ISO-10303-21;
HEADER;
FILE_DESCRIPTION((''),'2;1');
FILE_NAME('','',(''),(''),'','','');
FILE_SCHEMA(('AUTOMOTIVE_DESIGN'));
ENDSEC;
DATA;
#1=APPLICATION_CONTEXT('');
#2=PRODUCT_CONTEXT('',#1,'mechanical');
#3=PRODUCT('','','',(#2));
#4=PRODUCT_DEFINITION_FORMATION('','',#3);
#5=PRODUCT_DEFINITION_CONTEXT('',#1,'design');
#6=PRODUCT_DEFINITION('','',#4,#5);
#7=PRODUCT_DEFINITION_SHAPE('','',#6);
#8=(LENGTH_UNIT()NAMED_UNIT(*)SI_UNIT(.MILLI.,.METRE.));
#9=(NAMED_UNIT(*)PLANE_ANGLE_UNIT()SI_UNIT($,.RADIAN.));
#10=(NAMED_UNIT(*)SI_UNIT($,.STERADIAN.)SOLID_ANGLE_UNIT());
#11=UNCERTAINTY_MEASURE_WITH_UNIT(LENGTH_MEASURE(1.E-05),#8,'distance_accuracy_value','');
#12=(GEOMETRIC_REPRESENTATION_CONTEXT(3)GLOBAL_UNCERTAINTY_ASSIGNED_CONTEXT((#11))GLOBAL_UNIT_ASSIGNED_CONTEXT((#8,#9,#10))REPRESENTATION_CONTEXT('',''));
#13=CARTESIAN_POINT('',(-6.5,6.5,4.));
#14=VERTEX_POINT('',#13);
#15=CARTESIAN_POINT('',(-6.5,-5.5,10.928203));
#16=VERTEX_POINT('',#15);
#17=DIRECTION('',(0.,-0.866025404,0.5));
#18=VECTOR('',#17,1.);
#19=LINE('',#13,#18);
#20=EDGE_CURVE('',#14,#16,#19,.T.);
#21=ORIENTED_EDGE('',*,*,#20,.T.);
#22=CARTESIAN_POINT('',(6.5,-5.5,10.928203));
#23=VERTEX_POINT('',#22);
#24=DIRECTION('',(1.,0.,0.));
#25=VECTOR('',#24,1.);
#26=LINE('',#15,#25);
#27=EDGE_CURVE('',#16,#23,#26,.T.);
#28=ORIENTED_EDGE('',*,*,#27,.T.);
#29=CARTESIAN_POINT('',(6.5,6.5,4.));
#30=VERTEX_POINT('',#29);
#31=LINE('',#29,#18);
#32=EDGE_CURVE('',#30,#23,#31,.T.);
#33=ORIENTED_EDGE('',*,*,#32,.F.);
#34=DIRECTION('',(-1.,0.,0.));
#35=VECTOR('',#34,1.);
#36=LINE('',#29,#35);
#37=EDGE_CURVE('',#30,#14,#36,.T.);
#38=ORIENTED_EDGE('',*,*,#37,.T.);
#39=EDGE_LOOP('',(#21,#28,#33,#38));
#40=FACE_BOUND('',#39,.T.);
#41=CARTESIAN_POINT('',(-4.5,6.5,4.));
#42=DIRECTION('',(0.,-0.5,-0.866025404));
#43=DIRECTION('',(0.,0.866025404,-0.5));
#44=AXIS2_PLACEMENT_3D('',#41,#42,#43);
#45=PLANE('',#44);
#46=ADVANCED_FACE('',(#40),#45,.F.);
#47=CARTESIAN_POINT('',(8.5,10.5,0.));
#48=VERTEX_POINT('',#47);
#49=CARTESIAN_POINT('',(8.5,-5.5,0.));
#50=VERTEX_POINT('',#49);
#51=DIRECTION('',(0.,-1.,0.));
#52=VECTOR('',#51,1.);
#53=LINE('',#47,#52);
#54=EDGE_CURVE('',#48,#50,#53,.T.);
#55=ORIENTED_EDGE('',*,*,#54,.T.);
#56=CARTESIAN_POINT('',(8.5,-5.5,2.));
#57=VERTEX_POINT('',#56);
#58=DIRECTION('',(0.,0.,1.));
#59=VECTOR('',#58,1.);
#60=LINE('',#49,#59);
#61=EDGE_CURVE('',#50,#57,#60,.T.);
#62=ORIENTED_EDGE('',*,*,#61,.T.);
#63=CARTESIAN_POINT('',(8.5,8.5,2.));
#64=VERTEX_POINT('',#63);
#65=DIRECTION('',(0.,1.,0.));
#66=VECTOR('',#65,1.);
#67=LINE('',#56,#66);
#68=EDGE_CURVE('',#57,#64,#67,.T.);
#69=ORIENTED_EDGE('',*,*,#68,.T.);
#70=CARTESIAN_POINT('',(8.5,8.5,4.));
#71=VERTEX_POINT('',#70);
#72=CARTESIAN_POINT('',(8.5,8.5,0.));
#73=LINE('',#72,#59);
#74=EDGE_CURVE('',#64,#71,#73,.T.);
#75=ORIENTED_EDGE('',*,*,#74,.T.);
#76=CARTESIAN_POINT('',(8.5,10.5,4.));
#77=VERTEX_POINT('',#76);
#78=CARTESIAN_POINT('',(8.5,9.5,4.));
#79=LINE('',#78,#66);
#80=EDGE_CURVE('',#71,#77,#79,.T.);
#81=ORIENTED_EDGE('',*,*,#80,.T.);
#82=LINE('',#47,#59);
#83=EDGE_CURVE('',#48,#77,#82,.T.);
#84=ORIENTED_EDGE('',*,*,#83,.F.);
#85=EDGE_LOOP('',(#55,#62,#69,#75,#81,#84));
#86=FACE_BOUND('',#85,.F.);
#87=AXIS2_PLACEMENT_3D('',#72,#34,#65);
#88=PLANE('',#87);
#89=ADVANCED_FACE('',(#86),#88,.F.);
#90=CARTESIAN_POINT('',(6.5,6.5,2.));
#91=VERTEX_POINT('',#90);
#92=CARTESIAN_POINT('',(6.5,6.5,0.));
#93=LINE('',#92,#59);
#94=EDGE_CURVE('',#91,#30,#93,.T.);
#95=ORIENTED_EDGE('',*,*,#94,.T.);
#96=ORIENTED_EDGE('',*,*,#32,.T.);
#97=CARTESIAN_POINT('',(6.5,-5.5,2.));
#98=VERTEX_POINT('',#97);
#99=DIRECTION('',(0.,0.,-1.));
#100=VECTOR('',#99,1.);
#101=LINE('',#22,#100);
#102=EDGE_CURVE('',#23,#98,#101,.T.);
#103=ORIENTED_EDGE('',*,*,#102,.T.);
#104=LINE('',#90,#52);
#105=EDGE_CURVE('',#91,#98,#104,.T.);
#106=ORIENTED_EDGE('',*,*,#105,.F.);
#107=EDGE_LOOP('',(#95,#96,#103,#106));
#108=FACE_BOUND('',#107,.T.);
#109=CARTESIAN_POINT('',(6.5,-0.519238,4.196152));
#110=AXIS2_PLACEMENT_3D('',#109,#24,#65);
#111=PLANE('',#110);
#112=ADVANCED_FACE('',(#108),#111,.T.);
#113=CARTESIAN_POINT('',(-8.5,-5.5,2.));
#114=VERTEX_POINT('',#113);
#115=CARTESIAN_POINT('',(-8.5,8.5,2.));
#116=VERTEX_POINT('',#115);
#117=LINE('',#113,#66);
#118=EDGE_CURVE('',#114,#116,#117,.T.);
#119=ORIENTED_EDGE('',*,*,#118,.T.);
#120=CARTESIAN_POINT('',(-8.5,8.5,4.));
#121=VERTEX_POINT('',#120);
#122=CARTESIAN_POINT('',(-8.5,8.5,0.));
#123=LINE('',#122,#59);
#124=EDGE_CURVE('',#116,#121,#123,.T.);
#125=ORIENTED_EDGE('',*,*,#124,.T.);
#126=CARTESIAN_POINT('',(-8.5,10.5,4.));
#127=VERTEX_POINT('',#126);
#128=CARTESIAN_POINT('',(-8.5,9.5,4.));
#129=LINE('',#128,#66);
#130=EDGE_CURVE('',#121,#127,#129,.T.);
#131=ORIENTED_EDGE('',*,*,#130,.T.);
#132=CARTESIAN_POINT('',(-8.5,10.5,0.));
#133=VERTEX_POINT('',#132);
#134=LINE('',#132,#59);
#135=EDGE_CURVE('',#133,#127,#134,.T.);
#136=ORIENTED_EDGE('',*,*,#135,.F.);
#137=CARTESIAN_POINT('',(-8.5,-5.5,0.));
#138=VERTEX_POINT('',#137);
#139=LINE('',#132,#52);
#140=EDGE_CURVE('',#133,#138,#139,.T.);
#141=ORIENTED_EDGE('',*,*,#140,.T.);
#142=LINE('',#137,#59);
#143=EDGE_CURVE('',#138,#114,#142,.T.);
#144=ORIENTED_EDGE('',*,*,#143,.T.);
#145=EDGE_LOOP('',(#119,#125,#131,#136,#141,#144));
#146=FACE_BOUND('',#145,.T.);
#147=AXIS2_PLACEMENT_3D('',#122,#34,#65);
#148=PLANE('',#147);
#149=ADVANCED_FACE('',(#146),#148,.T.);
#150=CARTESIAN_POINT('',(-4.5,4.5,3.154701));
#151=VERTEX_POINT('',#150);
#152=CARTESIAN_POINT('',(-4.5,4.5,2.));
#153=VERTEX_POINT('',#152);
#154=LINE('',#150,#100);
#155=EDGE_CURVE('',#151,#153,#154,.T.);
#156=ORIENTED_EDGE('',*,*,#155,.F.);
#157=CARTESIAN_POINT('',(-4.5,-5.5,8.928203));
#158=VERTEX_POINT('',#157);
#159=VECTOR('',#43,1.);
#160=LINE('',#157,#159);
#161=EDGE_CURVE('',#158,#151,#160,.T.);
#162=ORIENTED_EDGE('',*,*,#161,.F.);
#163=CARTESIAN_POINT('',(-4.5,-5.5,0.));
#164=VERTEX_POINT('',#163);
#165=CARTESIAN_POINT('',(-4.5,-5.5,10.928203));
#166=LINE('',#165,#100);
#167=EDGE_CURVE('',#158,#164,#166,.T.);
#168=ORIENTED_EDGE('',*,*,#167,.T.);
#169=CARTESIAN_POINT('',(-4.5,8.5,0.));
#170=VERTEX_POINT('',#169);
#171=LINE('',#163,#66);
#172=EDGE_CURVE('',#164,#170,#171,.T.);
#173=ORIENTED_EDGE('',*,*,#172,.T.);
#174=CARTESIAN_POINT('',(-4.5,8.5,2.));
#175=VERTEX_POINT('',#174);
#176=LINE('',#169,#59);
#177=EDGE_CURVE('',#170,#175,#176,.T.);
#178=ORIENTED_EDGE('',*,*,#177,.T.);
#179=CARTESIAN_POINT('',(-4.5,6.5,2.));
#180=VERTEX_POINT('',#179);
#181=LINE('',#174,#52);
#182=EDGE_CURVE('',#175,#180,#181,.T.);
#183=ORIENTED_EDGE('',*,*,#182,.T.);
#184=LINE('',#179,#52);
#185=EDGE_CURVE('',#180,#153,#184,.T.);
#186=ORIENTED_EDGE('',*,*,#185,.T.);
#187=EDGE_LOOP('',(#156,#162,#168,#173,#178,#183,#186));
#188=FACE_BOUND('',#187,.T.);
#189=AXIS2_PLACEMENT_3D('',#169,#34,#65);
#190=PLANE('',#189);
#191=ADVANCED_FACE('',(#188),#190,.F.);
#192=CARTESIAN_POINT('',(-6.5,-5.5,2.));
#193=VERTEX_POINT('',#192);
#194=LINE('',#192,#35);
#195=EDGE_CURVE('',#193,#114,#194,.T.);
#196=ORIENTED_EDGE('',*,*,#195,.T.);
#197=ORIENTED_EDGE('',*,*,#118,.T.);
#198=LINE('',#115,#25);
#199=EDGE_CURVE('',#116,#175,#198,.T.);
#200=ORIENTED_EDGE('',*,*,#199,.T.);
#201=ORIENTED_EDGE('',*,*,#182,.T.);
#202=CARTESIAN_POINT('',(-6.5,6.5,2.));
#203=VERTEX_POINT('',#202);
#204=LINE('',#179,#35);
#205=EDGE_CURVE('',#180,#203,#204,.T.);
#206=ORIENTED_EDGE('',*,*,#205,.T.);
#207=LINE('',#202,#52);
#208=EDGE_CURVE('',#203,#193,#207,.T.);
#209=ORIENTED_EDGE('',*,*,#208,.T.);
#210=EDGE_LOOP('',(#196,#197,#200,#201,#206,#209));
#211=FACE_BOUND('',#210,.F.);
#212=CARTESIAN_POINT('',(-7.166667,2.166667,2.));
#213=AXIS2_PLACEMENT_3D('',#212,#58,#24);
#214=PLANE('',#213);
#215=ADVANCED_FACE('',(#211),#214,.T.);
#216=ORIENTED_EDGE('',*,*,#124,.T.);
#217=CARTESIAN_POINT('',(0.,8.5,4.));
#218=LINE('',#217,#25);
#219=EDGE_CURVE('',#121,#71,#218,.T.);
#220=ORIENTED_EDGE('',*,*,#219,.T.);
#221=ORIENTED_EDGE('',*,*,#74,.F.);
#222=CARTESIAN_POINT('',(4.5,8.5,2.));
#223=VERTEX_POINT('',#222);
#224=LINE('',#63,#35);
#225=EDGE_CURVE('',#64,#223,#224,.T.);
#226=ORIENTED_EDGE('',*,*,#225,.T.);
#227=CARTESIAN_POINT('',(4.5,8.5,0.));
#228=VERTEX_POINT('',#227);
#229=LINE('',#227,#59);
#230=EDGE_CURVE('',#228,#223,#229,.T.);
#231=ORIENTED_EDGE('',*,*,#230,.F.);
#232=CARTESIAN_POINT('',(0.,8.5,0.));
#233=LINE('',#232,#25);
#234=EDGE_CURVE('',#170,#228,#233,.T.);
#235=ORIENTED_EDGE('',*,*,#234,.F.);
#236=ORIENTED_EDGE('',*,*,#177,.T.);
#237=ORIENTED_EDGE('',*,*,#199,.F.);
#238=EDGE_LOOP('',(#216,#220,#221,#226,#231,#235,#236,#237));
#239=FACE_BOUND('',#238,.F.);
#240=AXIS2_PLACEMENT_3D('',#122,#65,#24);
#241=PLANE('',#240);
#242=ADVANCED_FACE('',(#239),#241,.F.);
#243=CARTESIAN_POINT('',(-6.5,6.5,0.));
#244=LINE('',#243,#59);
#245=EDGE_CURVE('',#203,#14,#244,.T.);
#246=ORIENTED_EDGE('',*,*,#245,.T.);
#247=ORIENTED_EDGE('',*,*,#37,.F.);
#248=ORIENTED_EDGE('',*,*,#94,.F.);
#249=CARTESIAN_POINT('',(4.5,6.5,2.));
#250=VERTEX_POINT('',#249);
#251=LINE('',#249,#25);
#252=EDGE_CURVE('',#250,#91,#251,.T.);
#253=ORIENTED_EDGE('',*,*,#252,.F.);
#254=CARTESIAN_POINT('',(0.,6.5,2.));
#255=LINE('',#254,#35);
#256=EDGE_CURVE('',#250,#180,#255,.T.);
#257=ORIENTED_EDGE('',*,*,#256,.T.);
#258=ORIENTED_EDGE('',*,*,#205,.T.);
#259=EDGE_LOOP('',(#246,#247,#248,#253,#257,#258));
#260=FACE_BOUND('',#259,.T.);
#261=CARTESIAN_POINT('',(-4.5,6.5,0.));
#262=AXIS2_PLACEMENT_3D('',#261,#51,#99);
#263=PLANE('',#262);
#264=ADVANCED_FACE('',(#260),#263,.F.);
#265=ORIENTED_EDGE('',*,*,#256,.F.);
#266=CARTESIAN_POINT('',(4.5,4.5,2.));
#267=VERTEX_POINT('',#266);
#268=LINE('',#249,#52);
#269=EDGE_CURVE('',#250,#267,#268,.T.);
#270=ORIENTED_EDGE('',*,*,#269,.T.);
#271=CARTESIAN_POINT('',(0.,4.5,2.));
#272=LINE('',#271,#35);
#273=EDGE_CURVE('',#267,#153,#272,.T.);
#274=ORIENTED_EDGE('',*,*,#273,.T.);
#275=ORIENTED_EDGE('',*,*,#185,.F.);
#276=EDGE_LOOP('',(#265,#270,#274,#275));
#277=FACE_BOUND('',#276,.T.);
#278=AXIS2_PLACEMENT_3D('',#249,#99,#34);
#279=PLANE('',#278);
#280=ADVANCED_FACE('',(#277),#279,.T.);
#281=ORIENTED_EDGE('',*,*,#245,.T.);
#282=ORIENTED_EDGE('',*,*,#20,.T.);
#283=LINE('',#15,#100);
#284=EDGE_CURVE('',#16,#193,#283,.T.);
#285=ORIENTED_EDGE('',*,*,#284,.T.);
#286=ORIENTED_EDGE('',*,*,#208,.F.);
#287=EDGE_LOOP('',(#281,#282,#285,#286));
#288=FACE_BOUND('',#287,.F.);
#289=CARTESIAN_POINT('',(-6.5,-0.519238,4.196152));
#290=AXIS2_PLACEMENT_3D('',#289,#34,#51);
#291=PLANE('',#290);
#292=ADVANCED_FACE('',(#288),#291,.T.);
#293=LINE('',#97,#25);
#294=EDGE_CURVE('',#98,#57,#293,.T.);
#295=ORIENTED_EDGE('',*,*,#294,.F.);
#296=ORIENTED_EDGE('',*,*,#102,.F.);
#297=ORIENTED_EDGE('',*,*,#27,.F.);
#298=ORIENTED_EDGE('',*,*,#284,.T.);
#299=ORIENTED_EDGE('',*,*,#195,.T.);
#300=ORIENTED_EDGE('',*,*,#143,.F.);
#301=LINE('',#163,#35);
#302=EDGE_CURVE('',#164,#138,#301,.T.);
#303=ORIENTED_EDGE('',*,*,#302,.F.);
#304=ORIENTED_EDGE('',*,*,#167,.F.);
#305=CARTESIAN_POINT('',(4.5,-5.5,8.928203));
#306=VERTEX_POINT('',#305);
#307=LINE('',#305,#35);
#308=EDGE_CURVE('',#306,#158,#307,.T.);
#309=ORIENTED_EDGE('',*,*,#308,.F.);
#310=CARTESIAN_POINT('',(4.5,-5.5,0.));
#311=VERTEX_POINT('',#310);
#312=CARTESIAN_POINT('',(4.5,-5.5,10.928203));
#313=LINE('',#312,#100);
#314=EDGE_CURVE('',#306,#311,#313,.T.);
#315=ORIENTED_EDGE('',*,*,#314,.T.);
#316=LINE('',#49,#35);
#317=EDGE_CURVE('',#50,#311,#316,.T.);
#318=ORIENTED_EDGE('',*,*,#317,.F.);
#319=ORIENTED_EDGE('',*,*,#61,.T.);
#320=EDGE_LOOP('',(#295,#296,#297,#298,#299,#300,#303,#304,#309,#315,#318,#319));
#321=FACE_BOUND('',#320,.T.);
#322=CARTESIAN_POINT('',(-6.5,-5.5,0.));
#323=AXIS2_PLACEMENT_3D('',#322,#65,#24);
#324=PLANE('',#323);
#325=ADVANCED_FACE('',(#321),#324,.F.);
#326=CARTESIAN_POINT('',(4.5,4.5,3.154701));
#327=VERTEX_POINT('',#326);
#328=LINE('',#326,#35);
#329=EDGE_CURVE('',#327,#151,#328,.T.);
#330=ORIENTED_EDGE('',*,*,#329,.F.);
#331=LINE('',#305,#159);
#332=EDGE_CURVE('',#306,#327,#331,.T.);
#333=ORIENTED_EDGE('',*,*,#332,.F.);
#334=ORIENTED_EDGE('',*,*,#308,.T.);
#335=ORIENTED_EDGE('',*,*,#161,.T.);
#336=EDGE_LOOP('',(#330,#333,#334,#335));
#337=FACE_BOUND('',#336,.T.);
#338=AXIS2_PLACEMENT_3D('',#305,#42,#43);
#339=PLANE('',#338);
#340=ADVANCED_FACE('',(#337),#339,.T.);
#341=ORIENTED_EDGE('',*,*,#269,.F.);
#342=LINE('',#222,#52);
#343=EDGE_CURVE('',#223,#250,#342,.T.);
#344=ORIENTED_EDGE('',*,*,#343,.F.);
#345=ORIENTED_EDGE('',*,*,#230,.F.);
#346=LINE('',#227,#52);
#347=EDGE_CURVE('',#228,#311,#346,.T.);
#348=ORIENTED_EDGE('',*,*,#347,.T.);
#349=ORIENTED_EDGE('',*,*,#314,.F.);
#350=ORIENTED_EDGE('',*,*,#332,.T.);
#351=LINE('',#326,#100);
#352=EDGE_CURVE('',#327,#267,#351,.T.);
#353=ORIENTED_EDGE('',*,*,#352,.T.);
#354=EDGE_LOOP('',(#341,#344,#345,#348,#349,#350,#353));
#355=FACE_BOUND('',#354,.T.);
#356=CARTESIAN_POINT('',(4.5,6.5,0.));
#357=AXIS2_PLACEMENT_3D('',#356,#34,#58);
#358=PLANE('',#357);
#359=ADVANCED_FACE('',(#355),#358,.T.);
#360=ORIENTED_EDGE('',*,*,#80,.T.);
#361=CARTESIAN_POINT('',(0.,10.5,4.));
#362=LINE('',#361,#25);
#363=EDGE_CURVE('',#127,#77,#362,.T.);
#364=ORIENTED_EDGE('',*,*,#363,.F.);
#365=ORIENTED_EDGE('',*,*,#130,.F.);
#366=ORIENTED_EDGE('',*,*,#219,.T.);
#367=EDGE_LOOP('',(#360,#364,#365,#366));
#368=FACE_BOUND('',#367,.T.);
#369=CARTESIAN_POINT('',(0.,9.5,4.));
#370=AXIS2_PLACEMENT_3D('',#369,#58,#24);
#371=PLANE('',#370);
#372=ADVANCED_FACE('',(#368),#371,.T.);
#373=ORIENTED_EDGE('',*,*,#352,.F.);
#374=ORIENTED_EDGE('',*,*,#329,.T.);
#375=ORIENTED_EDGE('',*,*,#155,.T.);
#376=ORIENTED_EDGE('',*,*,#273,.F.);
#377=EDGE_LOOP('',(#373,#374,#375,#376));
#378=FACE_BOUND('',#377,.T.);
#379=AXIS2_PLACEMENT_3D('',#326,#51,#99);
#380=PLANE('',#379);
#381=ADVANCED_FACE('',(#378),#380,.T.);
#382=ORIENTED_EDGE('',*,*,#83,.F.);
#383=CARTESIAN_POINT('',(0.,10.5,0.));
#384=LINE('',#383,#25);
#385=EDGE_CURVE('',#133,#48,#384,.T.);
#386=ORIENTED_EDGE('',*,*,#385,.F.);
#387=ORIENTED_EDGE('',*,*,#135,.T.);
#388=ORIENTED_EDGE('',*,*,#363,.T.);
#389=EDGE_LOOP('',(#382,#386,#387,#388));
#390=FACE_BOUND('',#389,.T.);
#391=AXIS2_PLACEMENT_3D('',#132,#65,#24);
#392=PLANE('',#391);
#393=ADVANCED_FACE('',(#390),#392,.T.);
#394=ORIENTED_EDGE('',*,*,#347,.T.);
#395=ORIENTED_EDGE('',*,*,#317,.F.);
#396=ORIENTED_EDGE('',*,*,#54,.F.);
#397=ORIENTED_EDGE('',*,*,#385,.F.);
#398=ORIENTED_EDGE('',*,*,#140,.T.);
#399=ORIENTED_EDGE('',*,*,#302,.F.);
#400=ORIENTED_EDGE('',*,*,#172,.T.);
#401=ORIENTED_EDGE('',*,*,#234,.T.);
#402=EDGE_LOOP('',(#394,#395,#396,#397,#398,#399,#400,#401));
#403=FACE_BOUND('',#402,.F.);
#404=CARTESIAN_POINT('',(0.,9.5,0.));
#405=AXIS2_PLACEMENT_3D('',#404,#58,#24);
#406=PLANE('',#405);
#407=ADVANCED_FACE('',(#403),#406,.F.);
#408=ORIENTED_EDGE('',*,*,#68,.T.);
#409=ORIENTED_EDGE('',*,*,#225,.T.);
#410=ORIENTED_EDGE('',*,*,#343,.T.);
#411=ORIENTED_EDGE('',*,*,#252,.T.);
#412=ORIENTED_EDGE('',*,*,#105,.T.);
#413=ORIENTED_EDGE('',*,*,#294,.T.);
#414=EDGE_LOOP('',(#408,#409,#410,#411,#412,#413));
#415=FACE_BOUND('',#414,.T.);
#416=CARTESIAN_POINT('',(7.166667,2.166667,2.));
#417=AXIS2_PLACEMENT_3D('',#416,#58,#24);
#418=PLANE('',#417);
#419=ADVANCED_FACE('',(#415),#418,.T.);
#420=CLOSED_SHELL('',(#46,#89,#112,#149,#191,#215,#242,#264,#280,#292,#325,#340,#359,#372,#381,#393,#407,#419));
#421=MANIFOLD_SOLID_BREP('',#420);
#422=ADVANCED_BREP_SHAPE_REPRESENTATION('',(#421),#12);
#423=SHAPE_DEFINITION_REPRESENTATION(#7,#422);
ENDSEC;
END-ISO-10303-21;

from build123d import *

# Parameters (mm, degrees)
F4_DEPTH  = 9
F6_DEPTH  = 2
F8_DEPTH  = 2
F9_W      = 9
F9_H      = 2
F10_DEPTH = 2
F11_W     = 17
F11_H     = 2
F12_DEPTH = 4


# Not quite as in the source:
# - a pattern or mirror of a feature is missing from the dataset's text; its kind, count and spacing are read off the source's solid


with BuildPart() as f4:
    # F3 (on plane+point) → F4 (new body, through all)
    with BuildSketch(Plane.YZ.offset(4.5)):
        Polygon((4.5, 0), (6.5, 0), (6.5, 4), (-5.5, 10.9282032303), (-5.5, 8.9282032303), (4.5, 3.1547005384), align=None)
    extrude(amount=-F4_DEPTH)

    # F5 (on face) → F6 (join)
    with BuildSketch(Plane.YZ.offset(4.5)):
        Polygon((6.5, 4), (-5.5, 10.9282032303), (-5.5, 0), (6.5, 0), align=None)
    f6 = extrude(amount=F6_DEPTH)

    # F6_copies: F6 across plane
    add(f6.mirror(Plane(origin=(0, 0, 0), x_dir=(0, 0, -1), z_dir=(-1, 0, 0))))

    # F7 (on Top) → F8 (join)
    with BuildSketch(Plane.XY):
        Polygon((4.5, 8.5), (4.5, 6.5), (6.5, 6.5), (6.5, -5.5), (8.5, -5.5), (8.5, 8.5), align=None)
    f8 = extrude(amount=F8_DEPTH)

    # F8_copies: F8 across plane
    add(f8.mirror(Plane(origin=(0, 0, 0), x_dir=(0, 0, -1), z_dir=(-1, 0, 0))))

    # F9 (on face) → F10 (cut, through all)
    with BuildSketch(Plane(origin=(0, 6.5, 0), x_dir=(-1, 0, 0), z_dir=(0, 1, 0))):
        with Locations((0, 1)):
            Rectangle(F9_W, F9_H)
    extrude(amount=-F10_DEPTH, mode=Mode.SUBTRACT)

    # F11 (on Top) → F12 (join)
    with BuildSketch(Plane.XY):
        with Locations((0, 9.5)):
            Rectangle(F11_W, F11_H)
    extrude(amount=F12_DEPTH)


solid = f4.part
